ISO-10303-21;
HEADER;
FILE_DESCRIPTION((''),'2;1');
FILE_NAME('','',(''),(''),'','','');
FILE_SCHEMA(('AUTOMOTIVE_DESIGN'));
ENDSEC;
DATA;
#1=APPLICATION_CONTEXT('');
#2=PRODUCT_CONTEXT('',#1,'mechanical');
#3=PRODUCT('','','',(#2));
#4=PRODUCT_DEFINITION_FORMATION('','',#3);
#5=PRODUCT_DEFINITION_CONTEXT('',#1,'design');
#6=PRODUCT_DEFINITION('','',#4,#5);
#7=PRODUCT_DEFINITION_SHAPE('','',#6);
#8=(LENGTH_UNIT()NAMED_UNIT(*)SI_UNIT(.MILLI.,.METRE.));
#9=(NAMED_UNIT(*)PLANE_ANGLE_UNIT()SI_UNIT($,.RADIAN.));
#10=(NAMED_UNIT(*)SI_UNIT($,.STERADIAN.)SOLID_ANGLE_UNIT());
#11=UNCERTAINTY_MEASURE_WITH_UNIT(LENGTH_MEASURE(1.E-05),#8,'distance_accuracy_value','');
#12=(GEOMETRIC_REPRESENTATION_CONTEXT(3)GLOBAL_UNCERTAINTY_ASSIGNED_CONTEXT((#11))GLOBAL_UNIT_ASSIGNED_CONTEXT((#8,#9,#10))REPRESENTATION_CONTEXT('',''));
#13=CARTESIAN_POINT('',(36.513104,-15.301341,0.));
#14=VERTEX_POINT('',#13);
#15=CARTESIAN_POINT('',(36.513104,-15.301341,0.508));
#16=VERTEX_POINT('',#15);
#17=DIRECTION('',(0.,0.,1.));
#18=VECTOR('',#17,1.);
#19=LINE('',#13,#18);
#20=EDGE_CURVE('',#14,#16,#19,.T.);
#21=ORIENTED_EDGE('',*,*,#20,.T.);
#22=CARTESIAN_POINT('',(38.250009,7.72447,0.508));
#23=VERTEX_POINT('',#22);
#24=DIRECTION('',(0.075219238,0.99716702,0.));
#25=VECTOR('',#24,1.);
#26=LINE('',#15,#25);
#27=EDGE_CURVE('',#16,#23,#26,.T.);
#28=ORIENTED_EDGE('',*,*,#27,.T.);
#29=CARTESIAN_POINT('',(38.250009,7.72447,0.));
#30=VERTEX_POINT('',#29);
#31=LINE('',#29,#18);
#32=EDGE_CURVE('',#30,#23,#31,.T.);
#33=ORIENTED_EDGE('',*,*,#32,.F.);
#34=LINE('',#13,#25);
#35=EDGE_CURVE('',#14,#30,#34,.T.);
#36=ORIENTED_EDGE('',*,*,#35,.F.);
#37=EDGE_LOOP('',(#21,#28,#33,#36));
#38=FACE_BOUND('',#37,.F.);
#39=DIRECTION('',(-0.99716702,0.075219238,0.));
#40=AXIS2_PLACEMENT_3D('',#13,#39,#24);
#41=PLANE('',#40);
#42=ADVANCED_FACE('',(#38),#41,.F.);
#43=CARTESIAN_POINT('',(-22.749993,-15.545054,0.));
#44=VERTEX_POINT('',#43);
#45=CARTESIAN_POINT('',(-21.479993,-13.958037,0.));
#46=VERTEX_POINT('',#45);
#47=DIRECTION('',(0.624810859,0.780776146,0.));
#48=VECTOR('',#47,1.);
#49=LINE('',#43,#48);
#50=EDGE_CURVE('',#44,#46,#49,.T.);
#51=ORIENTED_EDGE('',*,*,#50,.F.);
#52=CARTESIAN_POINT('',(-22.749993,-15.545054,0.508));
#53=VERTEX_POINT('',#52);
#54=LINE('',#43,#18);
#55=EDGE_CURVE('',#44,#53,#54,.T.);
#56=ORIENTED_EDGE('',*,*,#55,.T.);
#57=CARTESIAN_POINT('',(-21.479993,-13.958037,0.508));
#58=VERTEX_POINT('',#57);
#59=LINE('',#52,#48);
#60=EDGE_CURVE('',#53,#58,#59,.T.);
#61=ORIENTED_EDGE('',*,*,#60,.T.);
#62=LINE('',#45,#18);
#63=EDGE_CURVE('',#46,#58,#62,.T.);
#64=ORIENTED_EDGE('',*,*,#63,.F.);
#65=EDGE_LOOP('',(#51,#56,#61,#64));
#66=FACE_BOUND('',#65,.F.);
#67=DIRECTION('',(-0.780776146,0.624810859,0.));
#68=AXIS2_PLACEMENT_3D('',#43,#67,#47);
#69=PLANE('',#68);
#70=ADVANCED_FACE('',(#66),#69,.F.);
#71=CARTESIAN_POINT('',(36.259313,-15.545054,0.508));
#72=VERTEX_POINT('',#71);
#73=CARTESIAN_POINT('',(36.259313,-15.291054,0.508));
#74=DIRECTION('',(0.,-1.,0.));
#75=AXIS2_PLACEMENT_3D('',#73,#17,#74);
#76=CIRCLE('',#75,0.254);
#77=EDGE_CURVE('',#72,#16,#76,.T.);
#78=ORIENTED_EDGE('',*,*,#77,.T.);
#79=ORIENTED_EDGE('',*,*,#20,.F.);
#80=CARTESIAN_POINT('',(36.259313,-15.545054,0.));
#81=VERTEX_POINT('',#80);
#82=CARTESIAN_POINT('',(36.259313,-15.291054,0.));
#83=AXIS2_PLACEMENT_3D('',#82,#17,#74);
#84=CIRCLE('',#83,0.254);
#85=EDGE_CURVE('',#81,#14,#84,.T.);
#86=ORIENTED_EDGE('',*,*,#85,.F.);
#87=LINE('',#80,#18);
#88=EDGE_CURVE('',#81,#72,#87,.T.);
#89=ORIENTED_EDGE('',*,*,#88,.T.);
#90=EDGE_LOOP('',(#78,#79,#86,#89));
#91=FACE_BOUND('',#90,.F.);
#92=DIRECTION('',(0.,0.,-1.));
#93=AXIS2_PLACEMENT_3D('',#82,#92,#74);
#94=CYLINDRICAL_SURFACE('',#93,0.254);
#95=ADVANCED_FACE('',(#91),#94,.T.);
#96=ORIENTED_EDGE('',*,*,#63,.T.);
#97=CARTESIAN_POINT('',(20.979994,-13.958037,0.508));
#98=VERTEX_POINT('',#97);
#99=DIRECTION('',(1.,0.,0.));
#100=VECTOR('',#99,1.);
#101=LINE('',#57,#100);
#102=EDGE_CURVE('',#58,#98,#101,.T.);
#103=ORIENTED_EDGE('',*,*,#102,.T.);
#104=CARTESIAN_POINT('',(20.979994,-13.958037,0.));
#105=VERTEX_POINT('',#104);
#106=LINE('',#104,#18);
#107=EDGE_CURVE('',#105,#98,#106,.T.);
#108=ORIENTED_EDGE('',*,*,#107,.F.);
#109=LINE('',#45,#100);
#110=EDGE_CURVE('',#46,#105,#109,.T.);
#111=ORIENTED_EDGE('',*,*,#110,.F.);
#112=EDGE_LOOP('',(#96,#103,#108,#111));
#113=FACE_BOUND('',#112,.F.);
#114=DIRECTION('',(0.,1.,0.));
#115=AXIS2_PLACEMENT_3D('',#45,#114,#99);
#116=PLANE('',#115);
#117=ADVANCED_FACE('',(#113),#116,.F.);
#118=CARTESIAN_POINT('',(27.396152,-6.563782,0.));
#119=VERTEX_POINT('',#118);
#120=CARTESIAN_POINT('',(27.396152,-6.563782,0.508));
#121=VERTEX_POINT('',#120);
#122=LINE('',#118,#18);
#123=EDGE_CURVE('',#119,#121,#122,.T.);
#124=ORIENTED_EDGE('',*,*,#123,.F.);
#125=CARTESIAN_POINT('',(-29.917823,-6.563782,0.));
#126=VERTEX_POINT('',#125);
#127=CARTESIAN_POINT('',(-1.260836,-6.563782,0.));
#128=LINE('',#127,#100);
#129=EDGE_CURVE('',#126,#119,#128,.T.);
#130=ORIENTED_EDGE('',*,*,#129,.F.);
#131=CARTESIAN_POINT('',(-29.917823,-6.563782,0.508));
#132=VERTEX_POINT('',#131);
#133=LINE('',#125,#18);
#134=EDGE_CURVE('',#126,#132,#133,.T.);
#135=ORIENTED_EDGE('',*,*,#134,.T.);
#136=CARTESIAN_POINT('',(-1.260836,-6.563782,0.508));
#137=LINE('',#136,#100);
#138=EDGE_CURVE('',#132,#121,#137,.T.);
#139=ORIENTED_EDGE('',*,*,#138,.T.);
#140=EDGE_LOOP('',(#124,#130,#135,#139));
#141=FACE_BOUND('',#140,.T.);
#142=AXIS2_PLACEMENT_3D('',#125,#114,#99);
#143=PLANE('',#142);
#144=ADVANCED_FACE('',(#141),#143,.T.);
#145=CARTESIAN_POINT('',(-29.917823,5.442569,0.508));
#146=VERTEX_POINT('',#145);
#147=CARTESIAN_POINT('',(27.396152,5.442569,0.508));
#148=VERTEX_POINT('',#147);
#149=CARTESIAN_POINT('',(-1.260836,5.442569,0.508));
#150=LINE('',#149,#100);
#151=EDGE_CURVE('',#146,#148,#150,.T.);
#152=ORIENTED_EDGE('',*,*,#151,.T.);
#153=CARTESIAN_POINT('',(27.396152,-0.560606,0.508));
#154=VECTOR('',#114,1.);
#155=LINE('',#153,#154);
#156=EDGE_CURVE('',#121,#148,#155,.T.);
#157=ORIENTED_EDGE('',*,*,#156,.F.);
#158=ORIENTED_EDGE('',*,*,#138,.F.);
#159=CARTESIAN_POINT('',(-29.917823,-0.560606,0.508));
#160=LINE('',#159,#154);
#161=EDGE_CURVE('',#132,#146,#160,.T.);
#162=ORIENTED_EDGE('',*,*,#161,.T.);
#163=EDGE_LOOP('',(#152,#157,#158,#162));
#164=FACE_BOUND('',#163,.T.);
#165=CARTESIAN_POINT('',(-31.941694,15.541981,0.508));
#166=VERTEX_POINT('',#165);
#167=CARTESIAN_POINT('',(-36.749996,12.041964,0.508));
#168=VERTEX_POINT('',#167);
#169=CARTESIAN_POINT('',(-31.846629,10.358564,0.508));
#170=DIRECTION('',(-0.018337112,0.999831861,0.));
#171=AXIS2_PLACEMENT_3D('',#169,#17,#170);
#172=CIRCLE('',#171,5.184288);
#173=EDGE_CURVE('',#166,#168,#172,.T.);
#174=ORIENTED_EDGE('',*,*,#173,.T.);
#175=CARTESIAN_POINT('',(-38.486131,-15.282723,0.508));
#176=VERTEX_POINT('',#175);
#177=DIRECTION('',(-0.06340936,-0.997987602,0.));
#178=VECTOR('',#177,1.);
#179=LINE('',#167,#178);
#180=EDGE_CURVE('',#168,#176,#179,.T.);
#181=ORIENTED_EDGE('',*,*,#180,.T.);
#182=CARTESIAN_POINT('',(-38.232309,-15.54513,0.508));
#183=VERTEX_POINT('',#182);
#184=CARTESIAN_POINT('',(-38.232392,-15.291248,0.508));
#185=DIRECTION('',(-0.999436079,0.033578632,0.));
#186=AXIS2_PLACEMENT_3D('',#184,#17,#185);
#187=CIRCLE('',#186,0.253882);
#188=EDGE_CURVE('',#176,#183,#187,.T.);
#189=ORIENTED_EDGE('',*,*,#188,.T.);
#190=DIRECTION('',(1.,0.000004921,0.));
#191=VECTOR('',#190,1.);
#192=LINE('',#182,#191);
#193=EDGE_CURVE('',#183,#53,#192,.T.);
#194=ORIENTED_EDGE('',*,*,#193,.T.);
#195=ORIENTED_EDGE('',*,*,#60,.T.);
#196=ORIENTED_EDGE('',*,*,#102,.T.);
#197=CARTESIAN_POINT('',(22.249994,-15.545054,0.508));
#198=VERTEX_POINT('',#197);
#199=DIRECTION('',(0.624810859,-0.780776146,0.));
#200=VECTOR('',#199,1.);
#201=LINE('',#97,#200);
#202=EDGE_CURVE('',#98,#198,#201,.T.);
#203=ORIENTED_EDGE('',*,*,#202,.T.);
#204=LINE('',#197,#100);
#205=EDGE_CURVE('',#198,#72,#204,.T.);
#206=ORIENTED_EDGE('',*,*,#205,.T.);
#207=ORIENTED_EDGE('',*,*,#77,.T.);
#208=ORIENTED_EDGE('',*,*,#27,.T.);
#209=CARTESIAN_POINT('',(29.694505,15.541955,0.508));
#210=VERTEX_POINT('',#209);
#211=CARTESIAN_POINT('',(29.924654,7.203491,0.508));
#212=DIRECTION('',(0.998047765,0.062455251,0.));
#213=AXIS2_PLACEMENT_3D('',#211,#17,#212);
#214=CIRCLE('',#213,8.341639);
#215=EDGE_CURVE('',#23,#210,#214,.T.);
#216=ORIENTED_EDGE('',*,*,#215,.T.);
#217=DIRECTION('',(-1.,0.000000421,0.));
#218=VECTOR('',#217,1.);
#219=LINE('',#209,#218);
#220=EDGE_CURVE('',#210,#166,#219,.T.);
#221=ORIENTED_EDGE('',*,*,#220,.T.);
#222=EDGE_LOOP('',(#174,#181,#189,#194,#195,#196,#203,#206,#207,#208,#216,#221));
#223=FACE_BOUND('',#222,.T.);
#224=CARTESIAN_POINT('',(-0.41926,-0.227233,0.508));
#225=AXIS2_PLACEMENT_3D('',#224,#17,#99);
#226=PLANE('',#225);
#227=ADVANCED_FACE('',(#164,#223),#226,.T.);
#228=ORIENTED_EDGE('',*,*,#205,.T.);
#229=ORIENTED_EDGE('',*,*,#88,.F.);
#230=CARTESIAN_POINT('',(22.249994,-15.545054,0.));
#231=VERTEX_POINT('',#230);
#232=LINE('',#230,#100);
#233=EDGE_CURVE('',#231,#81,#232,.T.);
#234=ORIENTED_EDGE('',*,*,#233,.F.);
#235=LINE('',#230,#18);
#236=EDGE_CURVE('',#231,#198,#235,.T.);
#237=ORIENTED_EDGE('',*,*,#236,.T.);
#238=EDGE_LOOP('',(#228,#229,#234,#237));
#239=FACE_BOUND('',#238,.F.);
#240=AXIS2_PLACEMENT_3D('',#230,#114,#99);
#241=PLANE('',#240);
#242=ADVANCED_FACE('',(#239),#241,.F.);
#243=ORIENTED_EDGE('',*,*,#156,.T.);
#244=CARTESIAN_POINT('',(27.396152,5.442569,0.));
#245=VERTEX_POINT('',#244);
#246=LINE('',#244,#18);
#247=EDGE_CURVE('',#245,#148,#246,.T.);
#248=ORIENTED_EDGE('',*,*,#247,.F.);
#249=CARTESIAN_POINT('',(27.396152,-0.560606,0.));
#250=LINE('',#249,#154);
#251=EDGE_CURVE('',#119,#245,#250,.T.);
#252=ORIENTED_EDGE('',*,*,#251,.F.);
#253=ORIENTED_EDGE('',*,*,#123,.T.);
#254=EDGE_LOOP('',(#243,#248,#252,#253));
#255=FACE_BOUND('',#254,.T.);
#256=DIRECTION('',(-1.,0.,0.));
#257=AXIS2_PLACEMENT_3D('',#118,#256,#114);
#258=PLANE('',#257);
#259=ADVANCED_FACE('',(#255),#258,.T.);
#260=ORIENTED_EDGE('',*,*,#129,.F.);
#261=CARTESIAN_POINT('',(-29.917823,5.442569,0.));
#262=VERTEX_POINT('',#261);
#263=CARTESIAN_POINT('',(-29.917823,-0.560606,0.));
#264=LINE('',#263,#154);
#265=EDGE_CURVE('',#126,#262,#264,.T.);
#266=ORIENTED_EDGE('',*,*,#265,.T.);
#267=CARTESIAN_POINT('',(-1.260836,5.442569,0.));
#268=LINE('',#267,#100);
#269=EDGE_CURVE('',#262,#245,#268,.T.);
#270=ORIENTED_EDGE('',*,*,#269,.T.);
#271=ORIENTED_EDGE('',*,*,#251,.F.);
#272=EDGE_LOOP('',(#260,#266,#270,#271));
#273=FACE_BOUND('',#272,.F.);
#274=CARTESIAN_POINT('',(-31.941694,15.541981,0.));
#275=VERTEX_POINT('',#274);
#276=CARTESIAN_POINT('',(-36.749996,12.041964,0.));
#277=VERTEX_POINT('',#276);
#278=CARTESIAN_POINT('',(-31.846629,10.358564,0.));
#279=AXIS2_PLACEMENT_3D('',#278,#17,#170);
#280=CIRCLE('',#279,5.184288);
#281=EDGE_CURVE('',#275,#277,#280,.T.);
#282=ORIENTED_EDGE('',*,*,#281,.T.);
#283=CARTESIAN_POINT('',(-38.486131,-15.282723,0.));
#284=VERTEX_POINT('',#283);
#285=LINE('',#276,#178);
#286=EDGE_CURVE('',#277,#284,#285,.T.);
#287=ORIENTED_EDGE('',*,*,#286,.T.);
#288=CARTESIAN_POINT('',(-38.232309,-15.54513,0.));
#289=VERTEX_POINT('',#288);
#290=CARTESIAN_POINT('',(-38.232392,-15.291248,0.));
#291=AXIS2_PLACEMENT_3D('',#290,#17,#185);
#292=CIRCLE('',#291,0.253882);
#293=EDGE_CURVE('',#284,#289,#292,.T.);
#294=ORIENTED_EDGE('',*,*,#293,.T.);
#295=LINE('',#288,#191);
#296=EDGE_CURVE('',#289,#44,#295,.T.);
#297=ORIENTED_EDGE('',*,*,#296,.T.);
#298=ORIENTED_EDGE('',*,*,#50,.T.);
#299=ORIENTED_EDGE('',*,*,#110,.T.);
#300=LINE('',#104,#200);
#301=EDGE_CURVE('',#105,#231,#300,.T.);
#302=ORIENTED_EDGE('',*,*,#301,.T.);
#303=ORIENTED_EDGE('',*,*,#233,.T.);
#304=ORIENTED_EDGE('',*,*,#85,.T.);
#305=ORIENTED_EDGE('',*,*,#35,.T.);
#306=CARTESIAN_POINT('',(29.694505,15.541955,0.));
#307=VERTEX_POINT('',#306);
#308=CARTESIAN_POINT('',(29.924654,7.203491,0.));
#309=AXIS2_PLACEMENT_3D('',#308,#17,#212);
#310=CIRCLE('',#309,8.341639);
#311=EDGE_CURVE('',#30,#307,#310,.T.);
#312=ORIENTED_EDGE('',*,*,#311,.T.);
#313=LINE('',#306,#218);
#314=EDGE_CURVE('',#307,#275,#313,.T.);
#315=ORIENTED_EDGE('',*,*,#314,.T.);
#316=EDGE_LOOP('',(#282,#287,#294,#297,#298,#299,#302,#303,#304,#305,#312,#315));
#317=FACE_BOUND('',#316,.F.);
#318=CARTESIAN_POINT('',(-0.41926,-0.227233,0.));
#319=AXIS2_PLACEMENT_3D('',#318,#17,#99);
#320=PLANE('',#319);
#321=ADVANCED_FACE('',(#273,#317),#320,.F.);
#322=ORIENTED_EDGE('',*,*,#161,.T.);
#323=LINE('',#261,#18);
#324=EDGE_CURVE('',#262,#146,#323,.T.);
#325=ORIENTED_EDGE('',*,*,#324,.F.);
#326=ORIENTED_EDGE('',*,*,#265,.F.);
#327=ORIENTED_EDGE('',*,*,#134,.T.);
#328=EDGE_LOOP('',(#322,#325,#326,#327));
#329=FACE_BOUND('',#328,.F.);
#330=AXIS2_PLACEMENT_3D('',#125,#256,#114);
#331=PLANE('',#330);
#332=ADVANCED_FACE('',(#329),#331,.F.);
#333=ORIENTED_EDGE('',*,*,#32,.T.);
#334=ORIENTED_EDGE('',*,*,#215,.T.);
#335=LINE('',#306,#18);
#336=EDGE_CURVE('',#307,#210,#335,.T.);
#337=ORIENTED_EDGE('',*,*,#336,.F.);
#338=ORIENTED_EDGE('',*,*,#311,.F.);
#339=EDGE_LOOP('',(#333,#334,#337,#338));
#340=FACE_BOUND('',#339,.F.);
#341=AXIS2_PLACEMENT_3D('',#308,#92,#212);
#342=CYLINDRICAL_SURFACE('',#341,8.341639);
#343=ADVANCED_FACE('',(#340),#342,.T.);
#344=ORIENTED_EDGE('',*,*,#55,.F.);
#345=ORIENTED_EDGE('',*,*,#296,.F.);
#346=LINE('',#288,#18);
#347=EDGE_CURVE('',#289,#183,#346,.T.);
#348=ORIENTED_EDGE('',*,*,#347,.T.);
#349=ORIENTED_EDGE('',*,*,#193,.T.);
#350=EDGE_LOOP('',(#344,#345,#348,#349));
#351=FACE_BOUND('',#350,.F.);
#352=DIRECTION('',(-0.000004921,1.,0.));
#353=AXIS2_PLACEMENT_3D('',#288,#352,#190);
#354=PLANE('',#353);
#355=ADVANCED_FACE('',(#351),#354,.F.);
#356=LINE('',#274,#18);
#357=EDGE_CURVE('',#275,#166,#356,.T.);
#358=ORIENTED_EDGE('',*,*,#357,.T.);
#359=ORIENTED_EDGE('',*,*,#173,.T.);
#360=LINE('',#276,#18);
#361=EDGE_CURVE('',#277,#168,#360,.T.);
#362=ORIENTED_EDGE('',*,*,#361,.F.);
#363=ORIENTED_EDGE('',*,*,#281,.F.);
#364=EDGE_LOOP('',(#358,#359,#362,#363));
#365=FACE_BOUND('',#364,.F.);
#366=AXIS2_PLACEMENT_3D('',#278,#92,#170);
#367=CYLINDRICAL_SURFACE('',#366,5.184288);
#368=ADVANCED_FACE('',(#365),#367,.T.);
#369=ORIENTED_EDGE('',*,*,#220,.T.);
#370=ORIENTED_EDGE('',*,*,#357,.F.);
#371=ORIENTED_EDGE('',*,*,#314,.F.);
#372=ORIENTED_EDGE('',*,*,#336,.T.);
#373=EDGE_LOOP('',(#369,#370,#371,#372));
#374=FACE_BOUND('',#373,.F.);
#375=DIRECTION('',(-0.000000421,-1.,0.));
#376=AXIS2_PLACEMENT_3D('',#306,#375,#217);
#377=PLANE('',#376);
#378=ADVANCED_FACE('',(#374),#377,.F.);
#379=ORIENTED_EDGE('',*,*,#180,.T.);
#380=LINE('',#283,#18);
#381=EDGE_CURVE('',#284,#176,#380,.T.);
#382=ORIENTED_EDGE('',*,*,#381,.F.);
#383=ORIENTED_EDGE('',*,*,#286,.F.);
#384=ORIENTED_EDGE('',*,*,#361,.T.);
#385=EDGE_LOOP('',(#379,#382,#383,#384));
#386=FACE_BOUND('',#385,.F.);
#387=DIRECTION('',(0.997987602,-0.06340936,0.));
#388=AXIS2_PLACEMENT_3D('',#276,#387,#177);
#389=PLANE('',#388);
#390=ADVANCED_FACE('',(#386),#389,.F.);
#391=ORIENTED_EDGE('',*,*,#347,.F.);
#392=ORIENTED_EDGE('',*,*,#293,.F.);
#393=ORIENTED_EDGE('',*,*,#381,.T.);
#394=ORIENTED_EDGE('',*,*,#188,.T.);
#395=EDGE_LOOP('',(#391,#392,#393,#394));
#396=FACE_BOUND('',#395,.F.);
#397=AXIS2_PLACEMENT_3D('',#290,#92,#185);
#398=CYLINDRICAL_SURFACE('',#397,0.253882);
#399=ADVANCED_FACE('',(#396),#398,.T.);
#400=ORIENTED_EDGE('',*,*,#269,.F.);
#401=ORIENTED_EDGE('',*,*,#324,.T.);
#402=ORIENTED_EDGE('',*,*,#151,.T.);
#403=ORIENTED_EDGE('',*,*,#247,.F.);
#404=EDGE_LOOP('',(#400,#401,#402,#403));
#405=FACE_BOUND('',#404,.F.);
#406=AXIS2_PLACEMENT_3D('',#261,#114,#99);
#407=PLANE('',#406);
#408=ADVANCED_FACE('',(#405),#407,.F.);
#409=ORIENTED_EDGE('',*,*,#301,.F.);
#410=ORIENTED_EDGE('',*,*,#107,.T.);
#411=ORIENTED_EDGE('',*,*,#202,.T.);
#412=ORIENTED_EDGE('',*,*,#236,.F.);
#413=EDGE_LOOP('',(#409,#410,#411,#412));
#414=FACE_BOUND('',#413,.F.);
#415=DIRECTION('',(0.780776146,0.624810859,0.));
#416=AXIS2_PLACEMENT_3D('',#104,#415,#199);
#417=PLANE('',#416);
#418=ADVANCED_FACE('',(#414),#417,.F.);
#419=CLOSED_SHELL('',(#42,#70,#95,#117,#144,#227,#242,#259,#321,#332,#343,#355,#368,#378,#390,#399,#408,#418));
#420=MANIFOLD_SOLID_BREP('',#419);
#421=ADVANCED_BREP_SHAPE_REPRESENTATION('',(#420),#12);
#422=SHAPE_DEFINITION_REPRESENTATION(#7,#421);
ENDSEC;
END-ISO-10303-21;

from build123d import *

# Parameters (mm, degrees)
F0_W     = 57.3139749467
F0_H     = 12.0063517243
F1_DEPTH = 0.508


# Not quite as in the source:
# - ends of sketch curves that miss each other by under 0.0002 mm in the source are joined


with BuildPart() as f1:
    # F0 (on Top) → F1 (new body)
    with BuildSketch(Plane.XY):
        with BuildLine():
            Line((-36.7499960837, 12.0419642886), (-38.4861308, -15.2827228))
            ThreePointArc((-38.4861308, -15.2827228), (-38.4148753009, -15.4677583266), (-38.2323086, -15.5451301886))
            Line((-38.2323086, -15.5451301886), (-22.7499926, -15.545054))
            Line((-22.7499926, -15.545054), (-21.4799926, -13.9580366))
            Line((-21.4799926, -13.9580366), (20.9799936, -13.9580366))
            Line((20.9799936, -13.9580366), (22.2499936, -15.545054))
            Line((22.2499936, -15.545054), (36.2593128, -15.545054))
            ThreePointArc((36.2593128, -15.545054), (36.4352434048, -15.4742599559), (36.5131044113, -15.3013407897))
            Line((36.5131044113, -15.3013407897), (38.2500089611, 7.7244699848))
            ThreePointArc((38.2500089611, 7.7244699848), (35.5514966121, 13.3615420014), (29.6945050156, 15.5419546358))
            Line((29.6945050156, 15.5419546358), (-31.9416938, 15.5419806))
            ThreePointArc((-31.9416938, 15.5419806), (-34.897631264, 14.5500112443), (-36.7499960837, 12.0419642886))
        make_face()
        with Locations((-1.2608356774, -0.5606063642)):
            Rectangle(F0_W, F0_H, mode=Mode.SUBTRACT)
    extrude(amount=F1_DEPTH)


solid = f1.part
